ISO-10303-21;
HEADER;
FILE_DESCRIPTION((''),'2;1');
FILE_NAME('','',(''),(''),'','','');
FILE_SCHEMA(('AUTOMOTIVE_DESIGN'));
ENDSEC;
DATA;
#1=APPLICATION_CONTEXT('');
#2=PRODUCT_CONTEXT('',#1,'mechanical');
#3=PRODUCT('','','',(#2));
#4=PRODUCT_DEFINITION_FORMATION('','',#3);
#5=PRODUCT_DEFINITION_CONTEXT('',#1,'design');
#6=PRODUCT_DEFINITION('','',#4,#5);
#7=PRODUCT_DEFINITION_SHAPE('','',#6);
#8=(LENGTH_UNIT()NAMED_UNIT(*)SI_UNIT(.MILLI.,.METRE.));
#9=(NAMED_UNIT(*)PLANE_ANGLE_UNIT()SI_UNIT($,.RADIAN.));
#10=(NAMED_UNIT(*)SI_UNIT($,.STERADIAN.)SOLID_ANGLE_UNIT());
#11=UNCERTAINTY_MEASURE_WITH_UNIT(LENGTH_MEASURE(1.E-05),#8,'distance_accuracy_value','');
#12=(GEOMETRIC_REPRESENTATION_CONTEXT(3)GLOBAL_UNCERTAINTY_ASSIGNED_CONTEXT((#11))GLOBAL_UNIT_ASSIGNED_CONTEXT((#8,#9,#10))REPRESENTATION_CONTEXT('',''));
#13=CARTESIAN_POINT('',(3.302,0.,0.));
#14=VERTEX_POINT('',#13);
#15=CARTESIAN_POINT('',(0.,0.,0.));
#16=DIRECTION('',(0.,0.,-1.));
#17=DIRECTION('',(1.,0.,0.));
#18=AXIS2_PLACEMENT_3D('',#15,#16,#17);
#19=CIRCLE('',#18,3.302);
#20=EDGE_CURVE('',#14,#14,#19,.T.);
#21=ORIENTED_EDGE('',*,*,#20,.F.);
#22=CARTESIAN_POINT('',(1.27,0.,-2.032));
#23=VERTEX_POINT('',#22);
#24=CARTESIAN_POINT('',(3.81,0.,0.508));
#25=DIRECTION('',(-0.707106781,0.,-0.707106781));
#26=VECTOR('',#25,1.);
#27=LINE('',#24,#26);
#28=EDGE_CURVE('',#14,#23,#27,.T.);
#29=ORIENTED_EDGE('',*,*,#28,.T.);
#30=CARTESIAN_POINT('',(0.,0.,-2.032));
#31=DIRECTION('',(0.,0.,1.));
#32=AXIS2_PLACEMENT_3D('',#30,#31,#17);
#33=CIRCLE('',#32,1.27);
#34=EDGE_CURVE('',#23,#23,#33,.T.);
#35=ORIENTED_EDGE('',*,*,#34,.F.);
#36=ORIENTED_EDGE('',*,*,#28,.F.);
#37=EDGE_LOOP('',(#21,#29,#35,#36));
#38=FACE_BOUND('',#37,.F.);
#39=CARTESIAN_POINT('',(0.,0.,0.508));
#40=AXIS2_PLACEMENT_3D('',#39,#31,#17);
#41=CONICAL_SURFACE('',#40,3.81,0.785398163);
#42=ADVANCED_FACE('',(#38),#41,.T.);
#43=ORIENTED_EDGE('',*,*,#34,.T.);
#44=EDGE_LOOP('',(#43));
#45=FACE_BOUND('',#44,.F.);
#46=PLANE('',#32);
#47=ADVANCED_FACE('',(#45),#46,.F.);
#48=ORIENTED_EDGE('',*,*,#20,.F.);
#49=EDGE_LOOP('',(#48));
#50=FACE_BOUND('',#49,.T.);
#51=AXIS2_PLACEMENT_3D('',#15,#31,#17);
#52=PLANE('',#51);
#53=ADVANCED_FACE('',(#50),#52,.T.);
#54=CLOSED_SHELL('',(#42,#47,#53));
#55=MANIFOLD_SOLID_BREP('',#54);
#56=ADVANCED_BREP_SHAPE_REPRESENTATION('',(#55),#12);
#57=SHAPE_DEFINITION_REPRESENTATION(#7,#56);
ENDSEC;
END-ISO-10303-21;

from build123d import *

# Parameters (mm, degrees)
F0_R     = 3.81
F1_DEPTH = 2.032


# Not quite as in the source:
# - a fillet or chamfer that OpenCascade refuses, or shapes differently, is made with other operations: its cross-section is extruded or revolved along the edge and cut away or added


with BuildPart() as f1:
    # F0 (on Top) → F1 (new body)
    with BuildSketch(Plane.XY):
        Circle(F0_R)
    extrude(amount=-F1_DEPTH)

    # F2: chamfer of 2.54 on 1 edges, made by hand

    # F2_s1 → F2_t2 (revolve, cut)
    with BuildSketch(Plane.XZ):
        Polygon((3.81, 0.508), (1.27, -2.032), (3.81, -2.032), align=None)
    revolve(axis=Axis((0, 0, -2.032), (0, 0, 1)), mode=Mode.SUBTRACT)


solid = f1.part
